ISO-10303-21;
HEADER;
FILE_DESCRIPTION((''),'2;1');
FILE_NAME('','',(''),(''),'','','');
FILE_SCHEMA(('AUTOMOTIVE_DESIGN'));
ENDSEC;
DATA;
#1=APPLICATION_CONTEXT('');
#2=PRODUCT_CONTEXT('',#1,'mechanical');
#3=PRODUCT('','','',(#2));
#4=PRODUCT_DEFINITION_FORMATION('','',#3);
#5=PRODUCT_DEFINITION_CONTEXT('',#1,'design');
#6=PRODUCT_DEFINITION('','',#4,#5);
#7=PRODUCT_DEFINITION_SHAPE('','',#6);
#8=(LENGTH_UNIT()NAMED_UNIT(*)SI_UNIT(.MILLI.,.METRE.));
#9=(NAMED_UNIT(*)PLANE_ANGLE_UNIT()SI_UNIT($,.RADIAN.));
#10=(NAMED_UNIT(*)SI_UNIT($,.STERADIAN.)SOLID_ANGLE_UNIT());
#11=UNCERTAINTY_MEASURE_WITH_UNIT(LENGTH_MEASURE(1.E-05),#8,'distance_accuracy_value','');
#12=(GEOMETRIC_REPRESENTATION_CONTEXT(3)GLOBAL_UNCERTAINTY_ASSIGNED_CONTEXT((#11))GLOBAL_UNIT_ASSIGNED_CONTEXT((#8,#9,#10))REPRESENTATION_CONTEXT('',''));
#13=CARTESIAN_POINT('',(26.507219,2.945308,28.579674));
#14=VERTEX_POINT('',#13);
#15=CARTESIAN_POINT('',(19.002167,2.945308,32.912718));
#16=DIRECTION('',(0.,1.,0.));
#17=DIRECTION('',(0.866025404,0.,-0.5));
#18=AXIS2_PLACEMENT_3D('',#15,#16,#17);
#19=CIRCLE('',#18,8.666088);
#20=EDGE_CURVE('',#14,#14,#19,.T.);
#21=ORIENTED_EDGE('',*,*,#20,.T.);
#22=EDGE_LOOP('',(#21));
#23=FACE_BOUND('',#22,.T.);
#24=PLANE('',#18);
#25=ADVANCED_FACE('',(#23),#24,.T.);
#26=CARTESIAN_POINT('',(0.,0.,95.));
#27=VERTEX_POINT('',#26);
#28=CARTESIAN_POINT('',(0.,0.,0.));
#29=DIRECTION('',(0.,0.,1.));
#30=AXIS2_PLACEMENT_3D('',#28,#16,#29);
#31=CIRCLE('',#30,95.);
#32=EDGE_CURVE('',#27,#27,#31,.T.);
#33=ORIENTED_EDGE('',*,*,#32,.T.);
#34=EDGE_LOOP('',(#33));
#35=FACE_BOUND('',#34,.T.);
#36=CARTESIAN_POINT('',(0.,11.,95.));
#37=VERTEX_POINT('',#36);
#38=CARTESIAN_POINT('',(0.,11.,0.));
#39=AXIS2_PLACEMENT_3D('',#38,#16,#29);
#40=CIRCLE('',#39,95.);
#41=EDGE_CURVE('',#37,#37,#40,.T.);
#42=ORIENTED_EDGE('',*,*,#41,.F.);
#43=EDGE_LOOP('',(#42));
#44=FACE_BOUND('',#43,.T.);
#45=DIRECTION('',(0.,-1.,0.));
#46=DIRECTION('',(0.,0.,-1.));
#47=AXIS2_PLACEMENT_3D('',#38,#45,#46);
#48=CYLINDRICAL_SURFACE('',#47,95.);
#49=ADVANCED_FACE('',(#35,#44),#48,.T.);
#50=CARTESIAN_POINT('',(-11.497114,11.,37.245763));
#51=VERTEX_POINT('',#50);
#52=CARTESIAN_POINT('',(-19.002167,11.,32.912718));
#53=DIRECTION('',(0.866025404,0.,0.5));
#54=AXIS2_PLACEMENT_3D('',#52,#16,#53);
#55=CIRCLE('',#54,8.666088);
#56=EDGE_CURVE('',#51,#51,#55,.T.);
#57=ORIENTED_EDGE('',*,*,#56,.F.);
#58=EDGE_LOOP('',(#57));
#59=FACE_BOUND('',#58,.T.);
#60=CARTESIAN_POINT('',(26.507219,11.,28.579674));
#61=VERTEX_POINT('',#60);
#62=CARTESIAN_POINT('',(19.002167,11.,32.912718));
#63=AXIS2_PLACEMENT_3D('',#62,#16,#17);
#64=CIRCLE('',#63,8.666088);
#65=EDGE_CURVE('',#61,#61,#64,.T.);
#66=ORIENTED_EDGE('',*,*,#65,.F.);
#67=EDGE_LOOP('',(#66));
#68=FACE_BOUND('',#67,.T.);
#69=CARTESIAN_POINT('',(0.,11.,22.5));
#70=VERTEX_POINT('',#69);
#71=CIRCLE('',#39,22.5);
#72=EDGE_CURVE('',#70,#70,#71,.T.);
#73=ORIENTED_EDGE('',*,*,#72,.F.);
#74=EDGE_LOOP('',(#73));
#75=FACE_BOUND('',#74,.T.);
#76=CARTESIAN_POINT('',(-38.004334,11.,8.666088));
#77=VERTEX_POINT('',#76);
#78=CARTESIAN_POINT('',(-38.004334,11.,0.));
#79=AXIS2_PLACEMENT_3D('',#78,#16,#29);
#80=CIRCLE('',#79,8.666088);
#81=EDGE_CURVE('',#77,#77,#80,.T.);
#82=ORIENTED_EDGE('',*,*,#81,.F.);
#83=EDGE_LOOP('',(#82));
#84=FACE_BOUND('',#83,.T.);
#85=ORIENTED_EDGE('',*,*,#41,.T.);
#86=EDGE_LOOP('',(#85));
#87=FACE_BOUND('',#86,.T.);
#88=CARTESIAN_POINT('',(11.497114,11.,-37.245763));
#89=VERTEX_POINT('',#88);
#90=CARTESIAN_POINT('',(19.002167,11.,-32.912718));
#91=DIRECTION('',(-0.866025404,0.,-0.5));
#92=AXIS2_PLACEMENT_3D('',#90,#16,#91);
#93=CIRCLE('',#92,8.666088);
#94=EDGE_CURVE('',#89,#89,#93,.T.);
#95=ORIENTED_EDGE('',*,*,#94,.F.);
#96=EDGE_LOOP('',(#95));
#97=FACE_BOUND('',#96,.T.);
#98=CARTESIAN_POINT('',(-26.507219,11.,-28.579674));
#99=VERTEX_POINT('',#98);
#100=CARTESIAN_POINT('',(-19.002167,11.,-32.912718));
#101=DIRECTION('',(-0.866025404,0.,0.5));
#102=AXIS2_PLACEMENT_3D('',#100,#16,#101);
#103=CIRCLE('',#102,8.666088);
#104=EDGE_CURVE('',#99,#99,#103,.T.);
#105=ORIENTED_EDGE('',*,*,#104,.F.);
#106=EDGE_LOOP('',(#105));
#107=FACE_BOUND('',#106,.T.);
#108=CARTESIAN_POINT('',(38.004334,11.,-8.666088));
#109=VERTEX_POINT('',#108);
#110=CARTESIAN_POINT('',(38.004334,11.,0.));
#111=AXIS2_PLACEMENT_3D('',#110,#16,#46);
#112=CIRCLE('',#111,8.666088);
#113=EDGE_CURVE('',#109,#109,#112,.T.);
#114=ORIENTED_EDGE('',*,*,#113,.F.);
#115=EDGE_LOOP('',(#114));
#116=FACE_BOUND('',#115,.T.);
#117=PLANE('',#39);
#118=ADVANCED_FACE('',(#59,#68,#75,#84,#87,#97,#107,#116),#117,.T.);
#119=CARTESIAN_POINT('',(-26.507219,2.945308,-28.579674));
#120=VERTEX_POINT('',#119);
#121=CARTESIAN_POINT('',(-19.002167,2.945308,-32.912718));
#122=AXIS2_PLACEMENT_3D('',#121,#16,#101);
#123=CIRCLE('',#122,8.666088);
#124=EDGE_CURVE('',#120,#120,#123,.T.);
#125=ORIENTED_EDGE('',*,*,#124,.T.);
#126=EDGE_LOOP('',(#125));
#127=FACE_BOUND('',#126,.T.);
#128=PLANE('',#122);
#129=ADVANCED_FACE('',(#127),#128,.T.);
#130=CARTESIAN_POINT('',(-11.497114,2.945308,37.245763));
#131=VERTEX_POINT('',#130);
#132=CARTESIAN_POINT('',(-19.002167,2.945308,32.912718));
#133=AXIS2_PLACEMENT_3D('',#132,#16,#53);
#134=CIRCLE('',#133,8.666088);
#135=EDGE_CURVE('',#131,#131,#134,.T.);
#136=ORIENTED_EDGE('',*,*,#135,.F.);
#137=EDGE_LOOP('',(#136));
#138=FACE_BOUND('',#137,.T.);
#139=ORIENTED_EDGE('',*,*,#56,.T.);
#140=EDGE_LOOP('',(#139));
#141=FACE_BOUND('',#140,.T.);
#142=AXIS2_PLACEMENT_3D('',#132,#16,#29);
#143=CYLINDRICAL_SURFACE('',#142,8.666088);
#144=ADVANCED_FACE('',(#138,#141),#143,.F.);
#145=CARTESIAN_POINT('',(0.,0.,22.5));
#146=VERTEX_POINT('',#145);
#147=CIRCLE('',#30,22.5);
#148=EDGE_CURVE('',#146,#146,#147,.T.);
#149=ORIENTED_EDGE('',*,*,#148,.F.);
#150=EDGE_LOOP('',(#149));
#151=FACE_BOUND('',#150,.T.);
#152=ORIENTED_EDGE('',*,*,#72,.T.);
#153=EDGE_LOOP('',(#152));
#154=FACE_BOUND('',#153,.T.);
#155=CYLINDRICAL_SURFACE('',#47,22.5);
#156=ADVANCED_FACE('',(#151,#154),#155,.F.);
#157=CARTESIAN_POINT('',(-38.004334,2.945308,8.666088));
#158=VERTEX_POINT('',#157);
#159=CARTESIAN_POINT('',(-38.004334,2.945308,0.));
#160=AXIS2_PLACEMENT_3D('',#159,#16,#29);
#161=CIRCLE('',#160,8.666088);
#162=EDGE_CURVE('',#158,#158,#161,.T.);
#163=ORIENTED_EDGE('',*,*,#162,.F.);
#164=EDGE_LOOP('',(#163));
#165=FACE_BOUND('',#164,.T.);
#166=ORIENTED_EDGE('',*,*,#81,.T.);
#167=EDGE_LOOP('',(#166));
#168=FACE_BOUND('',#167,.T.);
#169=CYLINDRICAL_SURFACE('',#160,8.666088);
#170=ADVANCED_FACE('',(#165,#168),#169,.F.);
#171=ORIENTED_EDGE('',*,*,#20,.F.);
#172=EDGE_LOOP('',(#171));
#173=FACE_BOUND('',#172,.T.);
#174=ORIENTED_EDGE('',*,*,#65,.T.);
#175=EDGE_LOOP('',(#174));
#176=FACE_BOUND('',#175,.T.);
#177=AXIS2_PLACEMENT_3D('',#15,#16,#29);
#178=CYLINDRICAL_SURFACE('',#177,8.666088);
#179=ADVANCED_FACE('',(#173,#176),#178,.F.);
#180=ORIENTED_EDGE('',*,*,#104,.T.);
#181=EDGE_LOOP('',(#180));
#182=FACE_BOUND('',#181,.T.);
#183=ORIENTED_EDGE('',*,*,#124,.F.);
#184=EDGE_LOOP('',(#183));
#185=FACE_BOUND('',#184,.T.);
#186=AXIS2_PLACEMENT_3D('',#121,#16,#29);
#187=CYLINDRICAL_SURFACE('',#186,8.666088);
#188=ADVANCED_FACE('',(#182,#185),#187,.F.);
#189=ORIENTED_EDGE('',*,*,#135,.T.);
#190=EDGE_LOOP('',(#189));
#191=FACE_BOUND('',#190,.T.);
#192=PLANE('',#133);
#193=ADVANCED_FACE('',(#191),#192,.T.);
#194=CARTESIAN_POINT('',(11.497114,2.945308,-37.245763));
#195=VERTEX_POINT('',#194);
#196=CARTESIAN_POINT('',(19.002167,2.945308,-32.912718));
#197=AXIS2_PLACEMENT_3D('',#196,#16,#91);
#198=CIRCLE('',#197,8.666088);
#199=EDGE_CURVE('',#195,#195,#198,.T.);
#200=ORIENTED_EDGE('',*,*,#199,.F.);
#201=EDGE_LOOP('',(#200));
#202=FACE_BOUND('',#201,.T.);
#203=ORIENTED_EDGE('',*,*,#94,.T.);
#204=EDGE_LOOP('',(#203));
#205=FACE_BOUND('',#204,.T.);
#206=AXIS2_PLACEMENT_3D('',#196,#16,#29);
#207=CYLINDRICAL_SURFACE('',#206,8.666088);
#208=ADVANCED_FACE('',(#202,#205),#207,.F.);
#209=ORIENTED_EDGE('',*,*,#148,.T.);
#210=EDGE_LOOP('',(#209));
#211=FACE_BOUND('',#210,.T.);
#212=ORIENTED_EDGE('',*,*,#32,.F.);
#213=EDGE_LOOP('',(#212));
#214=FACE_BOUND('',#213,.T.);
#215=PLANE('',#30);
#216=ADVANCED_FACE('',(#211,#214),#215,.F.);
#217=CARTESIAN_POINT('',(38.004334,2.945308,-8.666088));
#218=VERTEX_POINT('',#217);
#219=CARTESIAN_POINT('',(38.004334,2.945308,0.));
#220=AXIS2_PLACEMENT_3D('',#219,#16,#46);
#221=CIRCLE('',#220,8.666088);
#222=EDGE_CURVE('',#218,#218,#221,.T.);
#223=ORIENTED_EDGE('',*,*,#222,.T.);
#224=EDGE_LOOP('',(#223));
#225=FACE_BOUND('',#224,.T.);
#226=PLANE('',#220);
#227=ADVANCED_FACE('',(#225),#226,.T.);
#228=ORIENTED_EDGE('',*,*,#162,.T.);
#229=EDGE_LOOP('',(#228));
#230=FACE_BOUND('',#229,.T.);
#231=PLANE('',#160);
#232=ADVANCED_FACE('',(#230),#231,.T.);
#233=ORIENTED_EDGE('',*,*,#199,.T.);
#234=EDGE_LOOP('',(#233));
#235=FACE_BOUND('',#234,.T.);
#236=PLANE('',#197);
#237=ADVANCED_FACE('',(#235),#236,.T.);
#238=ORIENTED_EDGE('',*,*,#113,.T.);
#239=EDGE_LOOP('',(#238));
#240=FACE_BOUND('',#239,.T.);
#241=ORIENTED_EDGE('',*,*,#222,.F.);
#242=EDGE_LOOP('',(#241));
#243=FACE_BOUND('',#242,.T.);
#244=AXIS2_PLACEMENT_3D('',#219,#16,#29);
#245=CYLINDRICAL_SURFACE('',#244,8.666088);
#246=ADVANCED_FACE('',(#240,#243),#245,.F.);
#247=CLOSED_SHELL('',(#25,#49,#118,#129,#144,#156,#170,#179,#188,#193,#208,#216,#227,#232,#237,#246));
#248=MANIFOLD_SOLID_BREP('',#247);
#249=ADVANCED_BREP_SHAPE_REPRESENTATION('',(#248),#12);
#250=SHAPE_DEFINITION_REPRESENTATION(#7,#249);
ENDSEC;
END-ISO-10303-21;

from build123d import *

# Parameters (mm, degrees)
SKETCH1_R           = 95
BOSS_EXTRUDE1_DEPTH = 11
SKETCH2_R           = 22.5
CUT_EXTRUDE1_DEPTH  = 135.799851632
SKETCH3_R           = 8.666088256
CUT_EXTRUDE2_DEPTH  = 8.054691676
CIRPATTERN1_COUNT   = 6


with BuildPart() as part:
    # Sketch1 → Boss-Extrude1 (new body)
    with BuildSketch(Plane(origin=(0, 0, 0), x_dir=(1, 0, 0), z_dir=(0, 1, 0))):
        Circle(SKETCH1_R)
    extrude(amount=BOSS_EXTRUDE1_DEPTH)

    # Sketch2 → Cut-Extrude1 (cut, through all)
    with BuildSketch(Plane(origin=(0, 0, 0), x_dir=(1, 0, 0), z_dir=(0, 1, 0))):
        Circle(SKETCH2_R)
    extrude(amount=CUT_EXTRUDE1_DEPTH, mode=Mode.SUBTRACT)

    # Sketch3 → Cut-Extrude2 (cut)
    with BuildSketch(Plane(origin=(0, 11, 0), x_dir=(1, 0, 0), z_dir=(0, 1, 0))):
        with Locations((-38.00433364, 0)):
            Circle(SKETCH3_R)
    cut_extrude2 = extrude(amount=-CUT_EXTRUDE2_DEPTH, mode=Mode.SUBTRACT)

    # CirPattern1: Cut-Extrude2 ×6 about axis
    cirpattern1_axis = Axis((0, 0, 0), (0, 1, 0))
    for i in range(1, CIRPATTERN1_COUNT):
        add(cut_extrude2.rotate(cirpattern1_axis, i * 360 / CIRPATTERN1_COUNT), mode=Mode.SUBTRACT)


solid = part.part
